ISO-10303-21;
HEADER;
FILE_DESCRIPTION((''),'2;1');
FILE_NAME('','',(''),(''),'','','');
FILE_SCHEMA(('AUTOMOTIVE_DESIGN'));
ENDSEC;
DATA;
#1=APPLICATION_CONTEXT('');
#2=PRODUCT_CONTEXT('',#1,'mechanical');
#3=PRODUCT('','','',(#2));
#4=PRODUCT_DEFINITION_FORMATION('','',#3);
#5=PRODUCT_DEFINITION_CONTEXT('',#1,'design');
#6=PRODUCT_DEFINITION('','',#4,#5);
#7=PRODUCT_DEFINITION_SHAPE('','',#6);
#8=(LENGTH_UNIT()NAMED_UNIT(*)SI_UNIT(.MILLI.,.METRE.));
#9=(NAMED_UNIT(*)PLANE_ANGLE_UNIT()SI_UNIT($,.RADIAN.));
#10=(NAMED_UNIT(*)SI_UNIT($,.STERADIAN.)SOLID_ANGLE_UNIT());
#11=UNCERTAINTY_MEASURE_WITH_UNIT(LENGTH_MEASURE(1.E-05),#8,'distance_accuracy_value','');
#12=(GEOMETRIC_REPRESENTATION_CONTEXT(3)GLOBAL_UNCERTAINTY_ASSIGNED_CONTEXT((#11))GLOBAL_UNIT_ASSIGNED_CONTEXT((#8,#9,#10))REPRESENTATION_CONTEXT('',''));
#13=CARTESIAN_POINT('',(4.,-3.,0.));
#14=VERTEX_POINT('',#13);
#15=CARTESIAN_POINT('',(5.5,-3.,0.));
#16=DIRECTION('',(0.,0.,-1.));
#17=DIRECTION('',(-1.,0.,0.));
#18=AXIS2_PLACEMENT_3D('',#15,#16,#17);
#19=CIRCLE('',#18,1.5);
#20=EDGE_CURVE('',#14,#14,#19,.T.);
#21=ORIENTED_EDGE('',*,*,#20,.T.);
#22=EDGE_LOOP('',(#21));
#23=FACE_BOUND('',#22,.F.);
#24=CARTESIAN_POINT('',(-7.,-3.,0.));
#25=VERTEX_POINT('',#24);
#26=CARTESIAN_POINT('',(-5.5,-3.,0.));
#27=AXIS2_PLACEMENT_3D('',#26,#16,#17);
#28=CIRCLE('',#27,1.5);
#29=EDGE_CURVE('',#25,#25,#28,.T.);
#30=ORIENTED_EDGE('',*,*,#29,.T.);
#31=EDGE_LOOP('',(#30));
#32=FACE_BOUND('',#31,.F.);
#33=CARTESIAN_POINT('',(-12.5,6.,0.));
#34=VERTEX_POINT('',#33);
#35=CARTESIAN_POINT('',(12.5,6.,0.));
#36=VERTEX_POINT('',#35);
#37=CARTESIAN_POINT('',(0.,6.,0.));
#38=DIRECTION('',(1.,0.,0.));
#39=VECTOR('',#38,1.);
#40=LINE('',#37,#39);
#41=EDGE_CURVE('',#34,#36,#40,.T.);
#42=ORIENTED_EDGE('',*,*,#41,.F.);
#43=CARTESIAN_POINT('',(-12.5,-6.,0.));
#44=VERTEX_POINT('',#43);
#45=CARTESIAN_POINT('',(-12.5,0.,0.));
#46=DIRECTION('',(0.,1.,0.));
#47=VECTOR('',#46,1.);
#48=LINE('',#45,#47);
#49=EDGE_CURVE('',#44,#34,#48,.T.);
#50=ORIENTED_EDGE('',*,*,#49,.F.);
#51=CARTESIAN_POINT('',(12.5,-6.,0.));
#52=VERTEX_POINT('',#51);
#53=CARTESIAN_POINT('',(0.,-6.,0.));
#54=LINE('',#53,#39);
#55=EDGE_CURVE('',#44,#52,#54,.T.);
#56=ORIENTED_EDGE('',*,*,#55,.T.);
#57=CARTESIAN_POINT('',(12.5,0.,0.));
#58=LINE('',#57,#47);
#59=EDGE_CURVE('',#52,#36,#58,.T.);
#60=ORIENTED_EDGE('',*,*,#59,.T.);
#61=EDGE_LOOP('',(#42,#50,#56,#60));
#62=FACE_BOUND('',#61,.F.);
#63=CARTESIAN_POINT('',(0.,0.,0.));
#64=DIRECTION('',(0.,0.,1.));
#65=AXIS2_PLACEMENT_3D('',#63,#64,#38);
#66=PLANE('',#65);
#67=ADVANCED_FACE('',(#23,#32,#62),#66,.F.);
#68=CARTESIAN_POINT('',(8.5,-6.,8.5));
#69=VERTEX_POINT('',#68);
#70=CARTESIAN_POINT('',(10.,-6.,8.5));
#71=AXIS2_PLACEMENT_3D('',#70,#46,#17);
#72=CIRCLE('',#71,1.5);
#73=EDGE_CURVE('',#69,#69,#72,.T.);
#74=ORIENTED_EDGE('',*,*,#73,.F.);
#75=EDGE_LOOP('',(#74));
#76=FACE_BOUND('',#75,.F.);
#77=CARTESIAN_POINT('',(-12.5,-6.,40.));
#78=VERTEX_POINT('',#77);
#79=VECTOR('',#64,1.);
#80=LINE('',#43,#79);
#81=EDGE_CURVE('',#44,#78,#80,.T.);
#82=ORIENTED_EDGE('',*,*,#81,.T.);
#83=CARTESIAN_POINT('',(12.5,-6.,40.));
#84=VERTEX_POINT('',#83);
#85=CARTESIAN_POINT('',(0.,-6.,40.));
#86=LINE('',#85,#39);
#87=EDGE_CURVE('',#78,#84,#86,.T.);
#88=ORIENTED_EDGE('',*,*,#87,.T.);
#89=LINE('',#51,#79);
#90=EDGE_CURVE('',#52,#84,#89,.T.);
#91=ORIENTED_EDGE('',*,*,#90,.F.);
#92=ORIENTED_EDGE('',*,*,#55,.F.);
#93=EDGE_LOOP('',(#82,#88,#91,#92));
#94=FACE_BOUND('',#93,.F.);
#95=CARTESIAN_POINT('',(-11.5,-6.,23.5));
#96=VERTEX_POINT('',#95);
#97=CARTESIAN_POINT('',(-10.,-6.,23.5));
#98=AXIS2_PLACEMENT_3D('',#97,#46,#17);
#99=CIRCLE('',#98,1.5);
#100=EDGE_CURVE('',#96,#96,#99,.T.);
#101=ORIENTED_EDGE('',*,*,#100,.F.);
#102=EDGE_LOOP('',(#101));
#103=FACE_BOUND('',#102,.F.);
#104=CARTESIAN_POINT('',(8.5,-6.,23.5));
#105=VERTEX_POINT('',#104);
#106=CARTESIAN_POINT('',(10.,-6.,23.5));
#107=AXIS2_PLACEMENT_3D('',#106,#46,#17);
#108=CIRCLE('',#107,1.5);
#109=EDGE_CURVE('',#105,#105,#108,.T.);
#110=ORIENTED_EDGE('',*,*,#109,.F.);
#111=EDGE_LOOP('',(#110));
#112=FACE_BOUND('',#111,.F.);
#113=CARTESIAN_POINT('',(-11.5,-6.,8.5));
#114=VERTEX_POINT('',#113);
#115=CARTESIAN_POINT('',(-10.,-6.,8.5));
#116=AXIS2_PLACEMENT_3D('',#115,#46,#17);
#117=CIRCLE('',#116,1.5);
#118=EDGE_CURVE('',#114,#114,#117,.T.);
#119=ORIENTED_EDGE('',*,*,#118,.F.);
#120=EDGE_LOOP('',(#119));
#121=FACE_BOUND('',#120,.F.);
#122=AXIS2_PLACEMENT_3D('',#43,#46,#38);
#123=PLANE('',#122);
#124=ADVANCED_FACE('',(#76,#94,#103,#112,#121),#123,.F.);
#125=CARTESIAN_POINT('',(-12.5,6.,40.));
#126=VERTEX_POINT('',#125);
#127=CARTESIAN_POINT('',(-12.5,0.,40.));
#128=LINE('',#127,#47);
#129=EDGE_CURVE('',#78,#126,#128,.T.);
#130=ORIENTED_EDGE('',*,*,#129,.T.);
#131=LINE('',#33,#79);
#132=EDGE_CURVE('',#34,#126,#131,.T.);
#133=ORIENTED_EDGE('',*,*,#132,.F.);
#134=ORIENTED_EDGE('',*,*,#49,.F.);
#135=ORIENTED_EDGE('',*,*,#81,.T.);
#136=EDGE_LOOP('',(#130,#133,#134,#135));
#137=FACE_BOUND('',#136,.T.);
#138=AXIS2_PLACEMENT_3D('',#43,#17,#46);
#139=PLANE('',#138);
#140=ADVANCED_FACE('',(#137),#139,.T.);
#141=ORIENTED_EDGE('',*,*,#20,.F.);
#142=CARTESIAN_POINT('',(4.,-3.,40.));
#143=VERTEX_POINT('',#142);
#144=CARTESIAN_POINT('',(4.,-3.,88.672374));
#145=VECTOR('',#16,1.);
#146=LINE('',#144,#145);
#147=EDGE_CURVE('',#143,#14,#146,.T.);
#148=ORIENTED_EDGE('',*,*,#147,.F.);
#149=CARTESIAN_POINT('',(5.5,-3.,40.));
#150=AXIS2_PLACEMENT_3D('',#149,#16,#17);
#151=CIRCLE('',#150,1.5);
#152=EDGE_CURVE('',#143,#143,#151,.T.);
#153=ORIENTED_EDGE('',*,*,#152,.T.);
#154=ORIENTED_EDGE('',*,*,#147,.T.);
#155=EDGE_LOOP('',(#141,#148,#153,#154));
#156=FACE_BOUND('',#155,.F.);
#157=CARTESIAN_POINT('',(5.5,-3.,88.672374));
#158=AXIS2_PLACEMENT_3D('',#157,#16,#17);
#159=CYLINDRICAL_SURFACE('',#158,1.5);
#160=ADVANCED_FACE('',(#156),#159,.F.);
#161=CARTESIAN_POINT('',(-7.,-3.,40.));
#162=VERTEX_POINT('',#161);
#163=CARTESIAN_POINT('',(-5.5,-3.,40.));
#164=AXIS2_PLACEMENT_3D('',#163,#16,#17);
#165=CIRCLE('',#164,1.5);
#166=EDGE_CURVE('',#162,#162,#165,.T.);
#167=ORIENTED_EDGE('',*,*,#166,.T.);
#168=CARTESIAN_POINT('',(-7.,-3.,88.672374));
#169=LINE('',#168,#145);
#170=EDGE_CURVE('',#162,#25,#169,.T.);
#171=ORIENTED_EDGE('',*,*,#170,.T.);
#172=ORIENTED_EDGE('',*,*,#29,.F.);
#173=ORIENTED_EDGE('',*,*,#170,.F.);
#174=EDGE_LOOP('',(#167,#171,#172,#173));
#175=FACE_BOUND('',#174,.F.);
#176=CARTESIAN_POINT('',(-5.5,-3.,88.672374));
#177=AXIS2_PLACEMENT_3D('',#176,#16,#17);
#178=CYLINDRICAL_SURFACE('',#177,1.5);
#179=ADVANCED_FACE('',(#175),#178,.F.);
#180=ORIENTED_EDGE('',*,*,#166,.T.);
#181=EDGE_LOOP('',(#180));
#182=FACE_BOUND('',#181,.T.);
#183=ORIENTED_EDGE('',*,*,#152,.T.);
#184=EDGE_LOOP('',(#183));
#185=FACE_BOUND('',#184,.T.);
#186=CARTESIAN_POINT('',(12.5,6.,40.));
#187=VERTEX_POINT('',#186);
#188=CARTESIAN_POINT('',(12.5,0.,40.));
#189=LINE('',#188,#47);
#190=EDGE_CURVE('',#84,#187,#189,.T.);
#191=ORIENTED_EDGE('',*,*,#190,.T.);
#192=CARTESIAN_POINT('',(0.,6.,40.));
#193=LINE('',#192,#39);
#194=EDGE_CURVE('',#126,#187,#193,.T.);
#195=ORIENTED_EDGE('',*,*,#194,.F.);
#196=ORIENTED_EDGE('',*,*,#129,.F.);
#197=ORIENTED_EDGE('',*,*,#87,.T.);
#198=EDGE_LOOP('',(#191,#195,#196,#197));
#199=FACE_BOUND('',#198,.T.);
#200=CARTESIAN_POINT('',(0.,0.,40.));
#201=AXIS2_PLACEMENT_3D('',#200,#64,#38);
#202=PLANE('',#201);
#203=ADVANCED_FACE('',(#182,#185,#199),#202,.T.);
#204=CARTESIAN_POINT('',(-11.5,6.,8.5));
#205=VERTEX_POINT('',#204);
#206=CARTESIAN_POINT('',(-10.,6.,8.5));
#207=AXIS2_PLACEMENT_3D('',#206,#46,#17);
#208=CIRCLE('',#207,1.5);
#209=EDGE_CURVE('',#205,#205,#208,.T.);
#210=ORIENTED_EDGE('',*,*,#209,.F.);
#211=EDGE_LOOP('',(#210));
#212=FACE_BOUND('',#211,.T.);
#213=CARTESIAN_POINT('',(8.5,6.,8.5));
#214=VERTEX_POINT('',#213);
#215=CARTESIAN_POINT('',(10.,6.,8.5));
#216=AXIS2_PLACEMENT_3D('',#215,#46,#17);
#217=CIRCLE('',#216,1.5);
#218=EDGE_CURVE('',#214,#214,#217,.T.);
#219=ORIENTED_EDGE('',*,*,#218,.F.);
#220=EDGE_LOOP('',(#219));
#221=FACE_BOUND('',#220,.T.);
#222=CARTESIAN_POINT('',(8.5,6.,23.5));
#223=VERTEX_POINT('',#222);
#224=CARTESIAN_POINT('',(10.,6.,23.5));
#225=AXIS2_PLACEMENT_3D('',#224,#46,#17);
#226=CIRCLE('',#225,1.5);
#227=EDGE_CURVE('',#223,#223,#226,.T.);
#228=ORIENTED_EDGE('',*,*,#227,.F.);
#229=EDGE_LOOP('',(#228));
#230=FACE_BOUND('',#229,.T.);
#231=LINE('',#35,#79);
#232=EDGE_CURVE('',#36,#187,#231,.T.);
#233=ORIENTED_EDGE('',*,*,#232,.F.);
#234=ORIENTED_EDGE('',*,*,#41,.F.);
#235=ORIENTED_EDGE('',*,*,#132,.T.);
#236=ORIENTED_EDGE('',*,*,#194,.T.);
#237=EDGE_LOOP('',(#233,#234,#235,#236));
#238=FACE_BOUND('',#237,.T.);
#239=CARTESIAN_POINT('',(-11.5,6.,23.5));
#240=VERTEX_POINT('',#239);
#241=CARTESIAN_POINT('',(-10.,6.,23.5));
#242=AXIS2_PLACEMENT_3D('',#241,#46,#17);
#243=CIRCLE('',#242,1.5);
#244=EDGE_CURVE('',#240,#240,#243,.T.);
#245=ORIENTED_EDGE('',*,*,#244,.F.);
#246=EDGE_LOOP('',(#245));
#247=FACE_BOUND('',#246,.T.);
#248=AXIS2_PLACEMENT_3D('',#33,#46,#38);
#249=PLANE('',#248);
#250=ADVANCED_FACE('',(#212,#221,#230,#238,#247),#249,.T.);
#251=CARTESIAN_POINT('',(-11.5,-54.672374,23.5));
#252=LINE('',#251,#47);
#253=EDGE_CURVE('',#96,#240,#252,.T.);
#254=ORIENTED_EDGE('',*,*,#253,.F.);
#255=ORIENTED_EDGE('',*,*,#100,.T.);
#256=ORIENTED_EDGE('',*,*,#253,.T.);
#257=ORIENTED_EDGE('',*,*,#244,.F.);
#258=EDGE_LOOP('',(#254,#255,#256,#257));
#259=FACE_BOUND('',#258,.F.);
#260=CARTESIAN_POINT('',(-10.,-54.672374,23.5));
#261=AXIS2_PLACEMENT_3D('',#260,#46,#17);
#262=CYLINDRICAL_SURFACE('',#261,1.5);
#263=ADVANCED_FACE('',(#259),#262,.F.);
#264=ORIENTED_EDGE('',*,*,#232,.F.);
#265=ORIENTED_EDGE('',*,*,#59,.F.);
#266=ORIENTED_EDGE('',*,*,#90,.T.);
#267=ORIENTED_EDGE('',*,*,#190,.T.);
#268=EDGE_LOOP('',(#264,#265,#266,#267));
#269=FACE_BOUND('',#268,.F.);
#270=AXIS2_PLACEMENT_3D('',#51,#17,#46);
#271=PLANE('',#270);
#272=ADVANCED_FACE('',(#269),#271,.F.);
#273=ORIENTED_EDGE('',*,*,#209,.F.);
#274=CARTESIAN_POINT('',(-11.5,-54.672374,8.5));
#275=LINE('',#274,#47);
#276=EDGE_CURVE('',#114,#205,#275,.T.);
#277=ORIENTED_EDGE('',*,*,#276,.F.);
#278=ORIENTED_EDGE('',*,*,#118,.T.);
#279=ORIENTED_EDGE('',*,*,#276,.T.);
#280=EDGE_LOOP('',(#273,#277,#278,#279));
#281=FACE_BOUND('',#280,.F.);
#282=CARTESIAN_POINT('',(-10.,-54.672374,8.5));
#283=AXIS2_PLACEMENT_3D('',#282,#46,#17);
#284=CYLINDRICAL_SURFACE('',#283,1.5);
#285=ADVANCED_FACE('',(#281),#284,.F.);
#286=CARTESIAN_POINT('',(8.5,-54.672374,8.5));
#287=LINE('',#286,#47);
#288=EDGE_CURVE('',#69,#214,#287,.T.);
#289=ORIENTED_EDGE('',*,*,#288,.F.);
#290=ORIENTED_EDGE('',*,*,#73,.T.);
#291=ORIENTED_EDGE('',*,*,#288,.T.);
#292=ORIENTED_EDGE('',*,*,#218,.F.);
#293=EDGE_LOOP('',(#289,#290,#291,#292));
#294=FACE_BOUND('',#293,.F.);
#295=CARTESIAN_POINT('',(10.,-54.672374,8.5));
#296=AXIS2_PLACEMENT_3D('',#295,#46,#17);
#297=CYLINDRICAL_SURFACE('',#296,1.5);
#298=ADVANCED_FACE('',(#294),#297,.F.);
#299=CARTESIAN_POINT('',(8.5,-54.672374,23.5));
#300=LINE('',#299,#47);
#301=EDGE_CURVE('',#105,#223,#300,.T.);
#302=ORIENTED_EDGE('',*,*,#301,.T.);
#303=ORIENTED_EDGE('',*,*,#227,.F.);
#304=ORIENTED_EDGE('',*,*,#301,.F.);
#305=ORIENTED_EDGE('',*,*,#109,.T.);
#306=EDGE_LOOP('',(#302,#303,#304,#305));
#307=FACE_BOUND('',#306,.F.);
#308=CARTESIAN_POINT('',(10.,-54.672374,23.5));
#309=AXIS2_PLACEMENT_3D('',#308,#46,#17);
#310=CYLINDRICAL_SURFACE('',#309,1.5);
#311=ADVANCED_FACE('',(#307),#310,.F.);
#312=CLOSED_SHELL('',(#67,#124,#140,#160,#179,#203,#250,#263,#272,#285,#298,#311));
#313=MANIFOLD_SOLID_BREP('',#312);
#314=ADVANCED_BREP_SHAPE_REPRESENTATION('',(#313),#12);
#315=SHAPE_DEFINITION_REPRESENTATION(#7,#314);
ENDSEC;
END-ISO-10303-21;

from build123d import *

# Parameters (mm, degrees)
F0_W     = 25
F0_H     = 12
F1_DEPTH = 40
F3_D     = 3
F5_D     = 3


# Not quite as in the source:
# - a feature names something its author has since deleted; it is built from what else it names


with BuildPart() as f1:
    # F0 (on Top) → F1 (new body)
    with BuildSketch(Plane.XY):
        Rectangle(F0_W, F0_H)
    extrude(amount=F1_DEPTH)

    # F3 (through all)
    with Locations(Plane.XZ.offset(6)):
        with Locations((-10, 23.5), (-10, 8.5), (10, 8.5), (10, 23.5)):
            Hole(F3_D / 2)

    # F5 (through all)
    with Locations(Plane.XY.offset(40)):
        with Locations((-5.5, -3), (5.5, -3), (-5.5, -3), (5.5, -3)):
            Hole(F5_D / 2)


solid = f1.part
